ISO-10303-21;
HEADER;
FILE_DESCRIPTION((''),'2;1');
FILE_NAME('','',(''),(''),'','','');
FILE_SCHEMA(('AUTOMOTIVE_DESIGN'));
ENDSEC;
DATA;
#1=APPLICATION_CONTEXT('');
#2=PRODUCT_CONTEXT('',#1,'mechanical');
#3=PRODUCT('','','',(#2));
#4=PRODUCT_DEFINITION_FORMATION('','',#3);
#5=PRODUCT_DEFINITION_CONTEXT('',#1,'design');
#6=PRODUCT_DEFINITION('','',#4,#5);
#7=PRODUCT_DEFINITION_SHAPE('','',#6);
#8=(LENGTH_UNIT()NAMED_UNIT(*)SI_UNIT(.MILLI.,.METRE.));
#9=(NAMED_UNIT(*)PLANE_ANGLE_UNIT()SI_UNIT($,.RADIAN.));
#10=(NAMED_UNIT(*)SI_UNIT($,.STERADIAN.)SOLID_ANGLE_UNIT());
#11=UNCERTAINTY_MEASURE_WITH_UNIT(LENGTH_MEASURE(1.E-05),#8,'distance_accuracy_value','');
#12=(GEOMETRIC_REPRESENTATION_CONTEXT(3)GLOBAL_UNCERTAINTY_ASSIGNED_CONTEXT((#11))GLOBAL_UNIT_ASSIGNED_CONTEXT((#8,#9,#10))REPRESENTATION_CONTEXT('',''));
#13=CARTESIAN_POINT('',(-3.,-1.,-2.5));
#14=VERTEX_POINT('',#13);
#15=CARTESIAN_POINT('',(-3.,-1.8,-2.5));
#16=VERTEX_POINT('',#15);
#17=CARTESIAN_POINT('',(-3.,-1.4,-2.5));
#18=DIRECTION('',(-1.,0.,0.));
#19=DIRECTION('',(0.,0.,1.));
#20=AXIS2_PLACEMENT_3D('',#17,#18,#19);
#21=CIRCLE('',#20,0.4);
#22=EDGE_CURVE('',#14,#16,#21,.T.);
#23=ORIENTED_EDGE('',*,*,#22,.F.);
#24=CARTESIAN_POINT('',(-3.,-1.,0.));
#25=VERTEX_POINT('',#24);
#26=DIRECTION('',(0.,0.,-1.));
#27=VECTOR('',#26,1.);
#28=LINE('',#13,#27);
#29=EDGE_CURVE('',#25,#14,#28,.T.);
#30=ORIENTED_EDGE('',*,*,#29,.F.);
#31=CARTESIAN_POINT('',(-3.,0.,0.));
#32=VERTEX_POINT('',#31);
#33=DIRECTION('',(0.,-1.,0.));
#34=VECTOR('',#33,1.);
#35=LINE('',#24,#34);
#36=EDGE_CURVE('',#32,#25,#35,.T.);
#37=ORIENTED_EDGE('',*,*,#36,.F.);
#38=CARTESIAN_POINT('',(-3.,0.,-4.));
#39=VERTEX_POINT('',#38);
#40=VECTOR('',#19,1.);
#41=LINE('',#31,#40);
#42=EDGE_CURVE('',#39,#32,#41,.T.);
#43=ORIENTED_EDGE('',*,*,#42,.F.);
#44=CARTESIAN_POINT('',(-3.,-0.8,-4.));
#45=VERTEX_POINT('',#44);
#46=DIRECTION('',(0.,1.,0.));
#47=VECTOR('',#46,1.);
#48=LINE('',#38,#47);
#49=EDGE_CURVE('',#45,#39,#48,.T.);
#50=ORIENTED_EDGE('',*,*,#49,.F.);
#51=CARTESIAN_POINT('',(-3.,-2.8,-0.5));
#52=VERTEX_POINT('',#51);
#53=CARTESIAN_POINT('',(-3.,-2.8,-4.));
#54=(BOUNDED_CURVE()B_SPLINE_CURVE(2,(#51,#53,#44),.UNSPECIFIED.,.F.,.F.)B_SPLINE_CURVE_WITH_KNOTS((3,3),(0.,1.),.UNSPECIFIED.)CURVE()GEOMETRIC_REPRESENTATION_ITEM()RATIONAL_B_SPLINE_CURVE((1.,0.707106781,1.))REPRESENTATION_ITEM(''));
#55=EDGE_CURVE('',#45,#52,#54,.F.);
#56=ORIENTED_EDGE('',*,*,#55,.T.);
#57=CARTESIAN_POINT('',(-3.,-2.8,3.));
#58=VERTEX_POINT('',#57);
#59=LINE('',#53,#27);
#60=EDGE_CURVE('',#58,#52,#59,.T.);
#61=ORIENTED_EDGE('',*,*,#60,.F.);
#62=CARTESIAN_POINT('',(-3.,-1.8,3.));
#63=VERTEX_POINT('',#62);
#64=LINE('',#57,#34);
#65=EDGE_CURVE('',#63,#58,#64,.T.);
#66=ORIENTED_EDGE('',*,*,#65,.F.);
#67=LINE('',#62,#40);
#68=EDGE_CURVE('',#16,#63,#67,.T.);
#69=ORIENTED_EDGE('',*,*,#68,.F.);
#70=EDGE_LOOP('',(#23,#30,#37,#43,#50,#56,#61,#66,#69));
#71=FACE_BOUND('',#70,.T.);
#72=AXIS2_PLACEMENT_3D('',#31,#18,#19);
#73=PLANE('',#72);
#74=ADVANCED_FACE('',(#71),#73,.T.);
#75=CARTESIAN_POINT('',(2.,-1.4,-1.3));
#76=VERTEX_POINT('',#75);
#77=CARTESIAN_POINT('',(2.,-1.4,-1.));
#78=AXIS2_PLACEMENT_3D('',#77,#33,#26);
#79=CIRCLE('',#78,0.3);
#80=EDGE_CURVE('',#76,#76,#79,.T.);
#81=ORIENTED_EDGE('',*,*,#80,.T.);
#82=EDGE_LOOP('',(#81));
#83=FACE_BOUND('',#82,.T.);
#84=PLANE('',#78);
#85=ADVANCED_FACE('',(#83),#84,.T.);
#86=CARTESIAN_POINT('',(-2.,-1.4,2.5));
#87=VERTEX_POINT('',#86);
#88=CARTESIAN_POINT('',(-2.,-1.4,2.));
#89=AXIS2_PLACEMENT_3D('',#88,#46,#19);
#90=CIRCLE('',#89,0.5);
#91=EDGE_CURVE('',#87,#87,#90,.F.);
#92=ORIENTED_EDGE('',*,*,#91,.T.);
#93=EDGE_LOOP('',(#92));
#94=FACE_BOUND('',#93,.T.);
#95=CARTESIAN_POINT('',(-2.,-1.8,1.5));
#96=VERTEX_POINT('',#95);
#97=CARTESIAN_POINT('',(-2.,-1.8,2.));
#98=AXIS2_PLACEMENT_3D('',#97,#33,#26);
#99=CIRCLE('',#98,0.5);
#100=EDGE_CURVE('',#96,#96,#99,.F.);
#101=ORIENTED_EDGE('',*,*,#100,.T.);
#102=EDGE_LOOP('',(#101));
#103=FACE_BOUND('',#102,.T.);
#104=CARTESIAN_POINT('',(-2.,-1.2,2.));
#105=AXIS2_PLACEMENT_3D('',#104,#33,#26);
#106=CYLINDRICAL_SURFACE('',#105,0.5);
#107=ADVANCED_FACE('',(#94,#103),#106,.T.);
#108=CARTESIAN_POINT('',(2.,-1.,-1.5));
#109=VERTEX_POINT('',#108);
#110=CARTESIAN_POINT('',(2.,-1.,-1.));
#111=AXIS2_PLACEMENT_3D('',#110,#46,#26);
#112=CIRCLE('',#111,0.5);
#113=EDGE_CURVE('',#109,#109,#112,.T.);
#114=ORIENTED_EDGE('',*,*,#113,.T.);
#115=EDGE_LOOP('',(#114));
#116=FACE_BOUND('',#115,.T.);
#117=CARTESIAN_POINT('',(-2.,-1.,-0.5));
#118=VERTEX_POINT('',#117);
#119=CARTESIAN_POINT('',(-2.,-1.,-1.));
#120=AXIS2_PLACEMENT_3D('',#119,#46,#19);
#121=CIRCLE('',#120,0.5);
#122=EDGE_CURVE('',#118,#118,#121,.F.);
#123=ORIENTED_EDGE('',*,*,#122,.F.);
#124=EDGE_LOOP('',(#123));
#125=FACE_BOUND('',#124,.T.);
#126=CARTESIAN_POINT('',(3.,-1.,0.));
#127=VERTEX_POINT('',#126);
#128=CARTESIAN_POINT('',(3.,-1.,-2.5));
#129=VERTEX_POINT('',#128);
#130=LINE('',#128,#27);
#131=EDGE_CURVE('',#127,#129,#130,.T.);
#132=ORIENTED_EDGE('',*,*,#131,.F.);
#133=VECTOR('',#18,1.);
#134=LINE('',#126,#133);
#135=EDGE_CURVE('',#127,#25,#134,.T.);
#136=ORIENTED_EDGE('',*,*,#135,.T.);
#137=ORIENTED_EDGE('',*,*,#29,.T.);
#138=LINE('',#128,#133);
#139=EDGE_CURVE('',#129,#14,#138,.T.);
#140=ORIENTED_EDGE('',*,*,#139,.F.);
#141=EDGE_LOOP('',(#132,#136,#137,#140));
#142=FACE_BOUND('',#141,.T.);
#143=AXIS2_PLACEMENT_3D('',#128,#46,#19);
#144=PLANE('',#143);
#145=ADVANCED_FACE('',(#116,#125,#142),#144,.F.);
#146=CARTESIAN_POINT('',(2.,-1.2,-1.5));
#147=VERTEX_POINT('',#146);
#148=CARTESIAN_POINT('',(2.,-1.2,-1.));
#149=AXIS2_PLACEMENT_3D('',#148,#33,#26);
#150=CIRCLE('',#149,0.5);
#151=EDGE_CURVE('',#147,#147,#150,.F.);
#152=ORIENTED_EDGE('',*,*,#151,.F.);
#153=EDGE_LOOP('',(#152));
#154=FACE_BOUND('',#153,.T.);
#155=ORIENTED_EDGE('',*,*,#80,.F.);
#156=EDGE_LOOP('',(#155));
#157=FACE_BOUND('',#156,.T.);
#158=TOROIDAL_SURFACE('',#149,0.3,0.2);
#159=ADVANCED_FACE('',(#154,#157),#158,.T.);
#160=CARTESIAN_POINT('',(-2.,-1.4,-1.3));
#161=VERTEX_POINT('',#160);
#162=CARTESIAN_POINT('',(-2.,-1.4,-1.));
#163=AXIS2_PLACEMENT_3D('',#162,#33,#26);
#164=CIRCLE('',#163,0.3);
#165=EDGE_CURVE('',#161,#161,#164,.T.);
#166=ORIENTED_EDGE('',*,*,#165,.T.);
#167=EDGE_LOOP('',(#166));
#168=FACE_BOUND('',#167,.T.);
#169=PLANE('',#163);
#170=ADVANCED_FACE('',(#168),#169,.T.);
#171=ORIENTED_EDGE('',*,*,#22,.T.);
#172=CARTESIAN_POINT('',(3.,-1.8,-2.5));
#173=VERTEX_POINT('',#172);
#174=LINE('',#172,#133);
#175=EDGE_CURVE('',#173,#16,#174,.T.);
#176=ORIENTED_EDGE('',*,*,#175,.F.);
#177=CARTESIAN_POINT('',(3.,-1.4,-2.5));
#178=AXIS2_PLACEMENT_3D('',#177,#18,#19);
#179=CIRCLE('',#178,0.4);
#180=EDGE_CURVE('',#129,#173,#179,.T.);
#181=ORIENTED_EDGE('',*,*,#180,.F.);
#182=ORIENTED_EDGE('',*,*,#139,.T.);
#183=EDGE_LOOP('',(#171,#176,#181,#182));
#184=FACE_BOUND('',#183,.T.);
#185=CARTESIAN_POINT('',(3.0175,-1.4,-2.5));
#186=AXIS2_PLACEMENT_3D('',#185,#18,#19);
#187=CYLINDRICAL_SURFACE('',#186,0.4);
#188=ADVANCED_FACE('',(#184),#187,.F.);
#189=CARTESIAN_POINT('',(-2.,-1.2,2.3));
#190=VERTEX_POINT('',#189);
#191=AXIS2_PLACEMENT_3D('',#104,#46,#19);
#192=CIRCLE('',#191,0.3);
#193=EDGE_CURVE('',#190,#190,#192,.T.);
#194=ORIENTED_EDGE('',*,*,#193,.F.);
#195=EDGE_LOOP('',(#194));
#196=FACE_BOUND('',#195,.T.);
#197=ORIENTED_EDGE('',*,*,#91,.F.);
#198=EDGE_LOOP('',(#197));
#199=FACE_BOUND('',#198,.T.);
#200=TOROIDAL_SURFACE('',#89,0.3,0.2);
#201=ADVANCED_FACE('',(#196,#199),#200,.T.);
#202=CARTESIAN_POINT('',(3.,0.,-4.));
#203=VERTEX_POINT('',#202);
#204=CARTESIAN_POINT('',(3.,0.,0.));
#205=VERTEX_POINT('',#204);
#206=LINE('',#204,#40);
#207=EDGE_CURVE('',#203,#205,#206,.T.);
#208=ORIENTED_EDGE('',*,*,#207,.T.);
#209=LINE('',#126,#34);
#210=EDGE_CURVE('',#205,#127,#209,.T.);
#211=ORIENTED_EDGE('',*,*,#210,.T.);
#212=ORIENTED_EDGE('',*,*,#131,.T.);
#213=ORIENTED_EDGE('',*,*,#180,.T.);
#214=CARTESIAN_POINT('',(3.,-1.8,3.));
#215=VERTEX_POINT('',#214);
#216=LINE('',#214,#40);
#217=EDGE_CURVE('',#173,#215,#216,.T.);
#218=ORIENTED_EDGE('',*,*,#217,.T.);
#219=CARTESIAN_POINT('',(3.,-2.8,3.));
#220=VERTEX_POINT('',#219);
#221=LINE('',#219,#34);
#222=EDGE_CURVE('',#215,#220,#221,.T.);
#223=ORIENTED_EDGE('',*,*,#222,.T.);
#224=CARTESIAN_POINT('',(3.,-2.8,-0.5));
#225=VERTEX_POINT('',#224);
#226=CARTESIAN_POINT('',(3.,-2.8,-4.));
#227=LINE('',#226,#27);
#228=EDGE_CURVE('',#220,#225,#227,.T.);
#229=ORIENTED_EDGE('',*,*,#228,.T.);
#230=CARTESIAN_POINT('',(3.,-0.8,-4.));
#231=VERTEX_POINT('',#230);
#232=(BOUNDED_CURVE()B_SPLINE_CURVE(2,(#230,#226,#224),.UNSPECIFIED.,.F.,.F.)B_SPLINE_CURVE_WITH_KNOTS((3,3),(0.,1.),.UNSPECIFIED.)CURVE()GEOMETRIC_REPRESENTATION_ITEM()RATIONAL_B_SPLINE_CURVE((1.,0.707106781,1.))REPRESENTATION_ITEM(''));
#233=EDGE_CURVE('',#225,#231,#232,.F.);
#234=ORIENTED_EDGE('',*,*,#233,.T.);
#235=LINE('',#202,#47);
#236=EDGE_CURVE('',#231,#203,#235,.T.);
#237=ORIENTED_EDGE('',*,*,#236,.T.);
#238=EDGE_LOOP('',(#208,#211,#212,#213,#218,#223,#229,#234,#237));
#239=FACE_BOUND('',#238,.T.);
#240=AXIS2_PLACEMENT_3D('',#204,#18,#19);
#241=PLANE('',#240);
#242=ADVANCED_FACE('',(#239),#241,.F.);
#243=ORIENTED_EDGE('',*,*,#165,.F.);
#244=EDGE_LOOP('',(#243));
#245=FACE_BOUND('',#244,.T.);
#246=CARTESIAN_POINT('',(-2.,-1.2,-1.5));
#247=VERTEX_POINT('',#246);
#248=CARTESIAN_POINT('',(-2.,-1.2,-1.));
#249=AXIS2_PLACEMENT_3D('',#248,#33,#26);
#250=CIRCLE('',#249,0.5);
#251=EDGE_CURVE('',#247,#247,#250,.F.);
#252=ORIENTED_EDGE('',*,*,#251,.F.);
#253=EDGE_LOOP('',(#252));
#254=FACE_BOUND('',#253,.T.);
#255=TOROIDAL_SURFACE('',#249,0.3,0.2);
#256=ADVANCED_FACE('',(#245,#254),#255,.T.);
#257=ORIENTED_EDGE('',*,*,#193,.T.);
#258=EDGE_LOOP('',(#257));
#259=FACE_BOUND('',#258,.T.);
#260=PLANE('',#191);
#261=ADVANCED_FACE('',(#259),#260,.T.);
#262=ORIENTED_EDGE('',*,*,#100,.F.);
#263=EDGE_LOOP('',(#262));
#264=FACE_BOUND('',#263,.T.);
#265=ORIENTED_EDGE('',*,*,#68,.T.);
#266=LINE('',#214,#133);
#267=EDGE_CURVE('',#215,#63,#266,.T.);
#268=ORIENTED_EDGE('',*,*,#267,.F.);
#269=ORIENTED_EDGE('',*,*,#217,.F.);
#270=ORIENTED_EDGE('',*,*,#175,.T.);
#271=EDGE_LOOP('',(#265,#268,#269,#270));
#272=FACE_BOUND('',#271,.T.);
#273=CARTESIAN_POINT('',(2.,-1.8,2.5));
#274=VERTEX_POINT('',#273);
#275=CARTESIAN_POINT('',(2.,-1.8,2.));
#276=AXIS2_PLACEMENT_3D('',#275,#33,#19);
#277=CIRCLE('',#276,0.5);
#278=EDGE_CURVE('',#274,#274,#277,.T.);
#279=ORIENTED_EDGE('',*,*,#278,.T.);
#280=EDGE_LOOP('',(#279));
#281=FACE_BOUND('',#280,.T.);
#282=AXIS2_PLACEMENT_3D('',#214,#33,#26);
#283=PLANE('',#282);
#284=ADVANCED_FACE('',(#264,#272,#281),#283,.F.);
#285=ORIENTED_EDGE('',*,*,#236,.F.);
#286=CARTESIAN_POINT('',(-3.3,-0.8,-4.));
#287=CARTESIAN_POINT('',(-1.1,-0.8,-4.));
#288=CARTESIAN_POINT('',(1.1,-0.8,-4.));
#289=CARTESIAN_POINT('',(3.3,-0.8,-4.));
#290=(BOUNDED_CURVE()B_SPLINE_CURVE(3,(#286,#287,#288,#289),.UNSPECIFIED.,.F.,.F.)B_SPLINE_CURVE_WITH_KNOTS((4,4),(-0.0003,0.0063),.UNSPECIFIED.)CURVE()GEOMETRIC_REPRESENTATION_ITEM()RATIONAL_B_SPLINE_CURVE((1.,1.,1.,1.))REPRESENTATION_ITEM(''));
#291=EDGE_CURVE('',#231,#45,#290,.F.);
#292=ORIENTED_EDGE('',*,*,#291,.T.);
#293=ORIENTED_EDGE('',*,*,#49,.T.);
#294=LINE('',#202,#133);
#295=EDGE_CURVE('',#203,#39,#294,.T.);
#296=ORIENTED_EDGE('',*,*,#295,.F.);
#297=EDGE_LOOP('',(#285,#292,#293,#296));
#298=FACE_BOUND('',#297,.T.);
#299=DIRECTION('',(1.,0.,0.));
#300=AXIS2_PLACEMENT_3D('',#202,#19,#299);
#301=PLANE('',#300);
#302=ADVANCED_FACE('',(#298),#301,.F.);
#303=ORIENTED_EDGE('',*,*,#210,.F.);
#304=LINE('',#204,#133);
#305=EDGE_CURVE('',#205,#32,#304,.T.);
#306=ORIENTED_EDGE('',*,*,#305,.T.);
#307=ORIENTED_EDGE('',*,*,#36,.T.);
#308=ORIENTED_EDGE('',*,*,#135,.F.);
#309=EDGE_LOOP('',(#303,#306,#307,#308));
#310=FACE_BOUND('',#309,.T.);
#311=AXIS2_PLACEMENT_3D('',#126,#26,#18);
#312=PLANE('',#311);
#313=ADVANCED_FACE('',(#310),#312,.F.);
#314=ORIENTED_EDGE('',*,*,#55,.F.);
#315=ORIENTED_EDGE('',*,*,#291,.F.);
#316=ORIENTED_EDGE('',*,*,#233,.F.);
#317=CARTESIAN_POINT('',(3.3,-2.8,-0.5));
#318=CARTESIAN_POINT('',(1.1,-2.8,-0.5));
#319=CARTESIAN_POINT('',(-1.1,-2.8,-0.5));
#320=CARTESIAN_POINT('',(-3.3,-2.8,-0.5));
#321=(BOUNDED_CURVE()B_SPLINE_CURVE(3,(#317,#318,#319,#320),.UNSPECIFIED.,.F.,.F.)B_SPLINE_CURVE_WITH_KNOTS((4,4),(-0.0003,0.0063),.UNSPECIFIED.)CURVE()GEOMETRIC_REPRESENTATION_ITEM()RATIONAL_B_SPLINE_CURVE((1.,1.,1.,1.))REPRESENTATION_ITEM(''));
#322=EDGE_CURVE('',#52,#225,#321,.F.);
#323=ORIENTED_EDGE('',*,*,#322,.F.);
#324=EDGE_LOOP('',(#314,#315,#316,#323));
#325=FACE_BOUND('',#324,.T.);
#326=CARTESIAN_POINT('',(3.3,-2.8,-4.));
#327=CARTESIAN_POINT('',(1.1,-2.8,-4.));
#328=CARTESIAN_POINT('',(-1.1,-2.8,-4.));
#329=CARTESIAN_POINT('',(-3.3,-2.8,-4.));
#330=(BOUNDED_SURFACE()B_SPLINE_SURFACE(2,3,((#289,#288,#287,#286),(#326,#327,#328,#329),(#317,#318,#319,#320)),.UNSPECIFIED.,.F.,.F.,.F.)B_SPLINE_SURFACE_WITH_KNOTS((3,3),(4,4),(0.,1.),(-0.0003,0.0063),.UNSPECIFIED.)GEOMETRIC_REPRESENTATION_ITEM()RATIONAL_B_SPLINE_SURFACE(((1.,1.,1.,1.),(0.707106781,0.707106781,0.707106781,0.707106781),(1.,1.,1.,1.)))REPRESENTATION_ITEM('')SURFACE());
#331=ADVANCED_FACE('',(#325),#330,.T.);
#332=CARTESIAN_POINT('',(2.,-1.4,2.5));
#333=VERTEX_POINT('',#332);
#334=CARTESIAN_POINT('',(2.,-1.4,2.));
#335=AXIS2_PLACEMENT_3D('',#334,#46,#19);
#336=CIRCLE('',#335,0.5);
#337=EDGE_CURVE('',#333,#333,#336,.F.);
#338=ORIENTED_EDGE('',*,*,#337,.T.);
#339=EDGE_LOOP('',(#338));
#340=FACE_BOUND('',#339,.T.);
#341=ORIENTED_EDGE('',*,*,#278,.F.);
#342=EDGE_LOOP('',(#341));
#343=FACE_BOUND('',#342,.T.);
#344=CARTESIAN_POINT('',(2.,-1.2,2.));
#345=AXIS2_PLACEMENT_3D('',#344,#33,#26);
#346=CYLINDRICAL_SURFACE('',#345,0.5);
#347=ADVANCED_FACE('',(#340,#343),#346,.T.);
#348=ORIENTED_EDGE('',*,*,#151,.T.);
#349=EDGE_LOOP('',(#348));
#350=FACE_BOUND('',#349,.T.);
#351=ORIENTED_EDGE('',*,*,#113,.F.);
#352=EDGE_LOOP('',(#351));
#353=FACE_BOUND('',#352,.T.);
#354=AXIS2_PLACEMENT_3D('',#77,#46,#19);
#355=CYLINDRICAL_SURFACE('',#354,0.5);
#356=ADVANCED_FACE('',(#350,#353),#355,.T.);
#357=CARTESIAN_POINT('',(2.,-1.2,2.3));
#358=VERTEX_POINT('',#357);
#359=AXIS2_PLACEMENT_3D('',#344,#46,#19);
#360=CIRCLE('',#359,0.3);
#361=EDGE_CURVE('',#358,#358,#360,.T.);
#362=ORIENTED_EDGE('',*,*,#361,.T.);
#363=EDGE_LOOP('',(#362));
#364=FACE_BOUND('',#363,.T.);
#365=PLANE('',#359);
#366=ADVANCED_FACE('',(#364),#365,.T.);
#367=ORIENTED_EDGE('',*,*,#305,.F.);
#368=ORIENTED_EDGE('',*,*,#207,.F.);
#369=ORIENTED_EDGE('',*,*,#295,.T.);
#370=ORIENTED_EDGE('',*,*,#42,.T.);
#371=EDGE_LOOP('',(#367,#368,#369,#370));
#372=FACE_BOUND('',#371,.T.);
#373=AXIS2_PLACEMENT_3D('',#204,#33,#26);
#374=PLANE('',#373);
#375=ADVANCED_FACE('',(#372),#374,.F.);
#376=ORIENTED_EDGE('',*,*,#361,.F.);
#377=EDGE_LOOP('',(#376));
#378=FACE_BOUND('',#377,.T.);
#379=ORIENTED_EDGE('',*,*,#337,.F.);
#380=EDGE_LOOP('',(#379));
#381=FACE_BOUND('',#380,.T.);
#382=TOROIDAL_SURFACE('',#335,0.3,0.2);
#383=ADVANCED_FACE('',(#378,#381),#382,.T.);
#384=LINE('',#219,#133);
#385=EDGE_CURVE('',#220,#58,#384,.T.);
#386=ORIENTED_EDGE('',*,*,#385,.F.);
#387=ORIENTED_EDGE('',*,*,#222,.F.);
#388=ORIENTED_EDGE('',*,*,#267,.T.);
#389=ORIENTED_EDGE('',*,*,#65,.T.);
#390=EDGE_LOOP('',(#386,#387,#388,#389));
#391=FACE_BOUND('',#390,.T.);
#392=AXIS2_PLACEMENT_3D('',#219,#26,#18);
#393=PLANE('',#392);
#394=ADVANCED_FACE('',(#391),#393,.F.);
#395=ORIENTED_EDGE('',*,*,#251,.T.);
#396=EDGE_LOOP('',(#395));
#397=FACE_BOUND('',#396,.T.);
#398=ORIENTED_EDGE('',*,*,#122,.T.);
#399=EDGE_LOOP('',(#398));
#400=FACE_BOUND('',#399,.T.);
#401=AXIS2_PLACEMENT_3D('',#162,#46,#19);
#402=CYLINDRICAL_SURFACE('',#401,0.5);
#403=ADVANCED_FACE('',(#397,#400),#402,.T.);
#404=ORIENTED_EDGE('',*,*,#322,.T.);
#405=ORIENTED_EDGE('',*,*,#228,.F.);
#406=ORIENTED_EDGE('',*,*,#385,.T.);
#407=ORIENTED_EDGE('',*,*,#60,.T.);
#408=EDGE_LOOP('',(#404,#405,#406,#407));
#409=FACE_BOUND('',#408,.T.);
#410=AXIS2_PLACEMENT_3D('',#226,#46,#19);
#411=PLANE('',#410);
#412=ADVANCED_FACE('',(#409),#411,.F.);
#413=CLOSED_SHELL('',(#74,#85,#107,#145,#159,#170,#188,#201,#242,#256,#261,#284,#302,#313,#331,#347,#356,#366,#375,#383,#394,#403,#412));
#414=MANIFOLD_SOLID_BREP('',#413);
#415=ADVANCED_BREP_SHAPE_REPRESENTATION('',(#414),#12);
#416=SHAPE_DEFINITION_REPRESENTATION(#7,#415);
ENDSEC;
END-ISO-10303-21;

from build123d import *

# Parameters (mm, degrees)
RESSALTO_EXTRUS_O1_DEPTH = 3
FILETE1_SIZE             = 3.5
FILETE1_SIZE_2           = 2
ESBO_O2_R                = 0.5
RESSALTO_EXTRUS_O4_DEPTH = 0.6
ESBO_O3_R                = 0.5
RESSALTO_EXTRUS_O5_DEPTH = 0.4
FILETE2_R                = 0.2
FILETE2_OF_ESPELHAR1_R   = 0.2
ESBO_O4_R                = 0.4
CORTE_EXTRUS_O1_DEPTH    = 8.735632008


with BuildPart() as part:
    # Esboço1 → Ressalto-extrusão1 (new, symmetric)
    with BuildSketch(Plane(origin=(0, 0, 0), x_dir=(0, 0, -1), z_dir=(1, 0, 0))):
        Polygon((0, 0), (4, 0), (4, -2.8), (-3, -2.8), (-3, -1.8), (2.5, -1.8), (2.5, -1), (0, -1), align=None)
    extrude(amount=RESSALTO_EXTRUS_O1_DEPTH, both=True)

    # Filete1
    # an asymmetric fillet: 3.5, 2 mm, written as the material it takes off along each edge
    with BuildSketch(Plane(origin=(11.75, -2.8, -4), x_dir=(0, 0, 1), z_dir=(-1, 0, 0))) as filete1_piece_1:
        with BuildLine():
            Bezier((FILETE1_SIZE, 0), (0, 0), (0, FILETE1_SIZE_2), weights=[1, 0.707106781, 1])
            Line((0, FILETE1_SIZE_2), (0, 0))
            Line((0, 0), (FILETE1_SIZE, 0))
        make_face()
    extrude(amount=23.5, mode=Mode.SUBTRACT)

    # Esboço2 → Ressalto-extrusão4 (add)
    with BuildSketch(Plane(origin=(0, -1.8, 0), x_dir=(1, 0, 0), z_dir=(0, 1, 0))):
        with Locations(Location((-2, -2, 0), (0, 0, 90))):
            Circle(ESBO_O2_R)
    ressalto_extrus_o4 = extrude(amount=RESSALTO_EXTRUS_O4_DEPTH)

    # Esboço3 → Ressalto-extrusão5 (add)
    with BuildSketch(Plane.XZ.offset(1)):
        with Locations(Location((-2, -1, 0), (0, 0, 90))):
            Circle(ESBO_O3_R)
    ressalto_extrus_o5 = extrude(amount=RESSALTO_EXTRUS_O5_DEPTH)

    # Filete2
    filete2_edges = [part.edges().sort_by_distance(p)[0] for p in [
        (-2, -1.2, 2.5),
        (-2, -1.4, -1.5),
    ]]
    fillet(filete2_edges, radius=FILETE2_R)

    # Espelhar1: Ressalto-extrusão4, Ressalto-extrusão5 across plane
    add(ressalto_extrus_o4.mirror(Plane(origin=(0, 0, 0), x_dir=(0, 0, 1), z_dir=(1, 0, 0))))
    add(ressalto_extrus_o5.mirror(Plane(origin=(0, 0, 0), x_dir=(0, 0, 1), z_dir=(1, 0, 0))))

    # Filete2 of Espelhar1
    filete2_of_espelhar1_edges = [part.edges().sort_by_distance(p)[0] for p in [
        (2, -1.2, 2.5),
        (2, -1.4, -1.5),
    ]]
    fillet(filete2_of_espelhar1_edges, radius=FILETE2_OF_ESPELHAR1_R)

    # Esboço4 → Corte-extrusão1 (cut, through all)
    with BuildSketch(Plane.ZY.offset(3)):
        with Locations((-2.5, -1.4)):
            Circle(ESBO_O4_R)
    extrude(amount=-CORTE_EXTRUS_O1_DEPTH, mode=Mode.SUBTRACT)


solid = part.part
